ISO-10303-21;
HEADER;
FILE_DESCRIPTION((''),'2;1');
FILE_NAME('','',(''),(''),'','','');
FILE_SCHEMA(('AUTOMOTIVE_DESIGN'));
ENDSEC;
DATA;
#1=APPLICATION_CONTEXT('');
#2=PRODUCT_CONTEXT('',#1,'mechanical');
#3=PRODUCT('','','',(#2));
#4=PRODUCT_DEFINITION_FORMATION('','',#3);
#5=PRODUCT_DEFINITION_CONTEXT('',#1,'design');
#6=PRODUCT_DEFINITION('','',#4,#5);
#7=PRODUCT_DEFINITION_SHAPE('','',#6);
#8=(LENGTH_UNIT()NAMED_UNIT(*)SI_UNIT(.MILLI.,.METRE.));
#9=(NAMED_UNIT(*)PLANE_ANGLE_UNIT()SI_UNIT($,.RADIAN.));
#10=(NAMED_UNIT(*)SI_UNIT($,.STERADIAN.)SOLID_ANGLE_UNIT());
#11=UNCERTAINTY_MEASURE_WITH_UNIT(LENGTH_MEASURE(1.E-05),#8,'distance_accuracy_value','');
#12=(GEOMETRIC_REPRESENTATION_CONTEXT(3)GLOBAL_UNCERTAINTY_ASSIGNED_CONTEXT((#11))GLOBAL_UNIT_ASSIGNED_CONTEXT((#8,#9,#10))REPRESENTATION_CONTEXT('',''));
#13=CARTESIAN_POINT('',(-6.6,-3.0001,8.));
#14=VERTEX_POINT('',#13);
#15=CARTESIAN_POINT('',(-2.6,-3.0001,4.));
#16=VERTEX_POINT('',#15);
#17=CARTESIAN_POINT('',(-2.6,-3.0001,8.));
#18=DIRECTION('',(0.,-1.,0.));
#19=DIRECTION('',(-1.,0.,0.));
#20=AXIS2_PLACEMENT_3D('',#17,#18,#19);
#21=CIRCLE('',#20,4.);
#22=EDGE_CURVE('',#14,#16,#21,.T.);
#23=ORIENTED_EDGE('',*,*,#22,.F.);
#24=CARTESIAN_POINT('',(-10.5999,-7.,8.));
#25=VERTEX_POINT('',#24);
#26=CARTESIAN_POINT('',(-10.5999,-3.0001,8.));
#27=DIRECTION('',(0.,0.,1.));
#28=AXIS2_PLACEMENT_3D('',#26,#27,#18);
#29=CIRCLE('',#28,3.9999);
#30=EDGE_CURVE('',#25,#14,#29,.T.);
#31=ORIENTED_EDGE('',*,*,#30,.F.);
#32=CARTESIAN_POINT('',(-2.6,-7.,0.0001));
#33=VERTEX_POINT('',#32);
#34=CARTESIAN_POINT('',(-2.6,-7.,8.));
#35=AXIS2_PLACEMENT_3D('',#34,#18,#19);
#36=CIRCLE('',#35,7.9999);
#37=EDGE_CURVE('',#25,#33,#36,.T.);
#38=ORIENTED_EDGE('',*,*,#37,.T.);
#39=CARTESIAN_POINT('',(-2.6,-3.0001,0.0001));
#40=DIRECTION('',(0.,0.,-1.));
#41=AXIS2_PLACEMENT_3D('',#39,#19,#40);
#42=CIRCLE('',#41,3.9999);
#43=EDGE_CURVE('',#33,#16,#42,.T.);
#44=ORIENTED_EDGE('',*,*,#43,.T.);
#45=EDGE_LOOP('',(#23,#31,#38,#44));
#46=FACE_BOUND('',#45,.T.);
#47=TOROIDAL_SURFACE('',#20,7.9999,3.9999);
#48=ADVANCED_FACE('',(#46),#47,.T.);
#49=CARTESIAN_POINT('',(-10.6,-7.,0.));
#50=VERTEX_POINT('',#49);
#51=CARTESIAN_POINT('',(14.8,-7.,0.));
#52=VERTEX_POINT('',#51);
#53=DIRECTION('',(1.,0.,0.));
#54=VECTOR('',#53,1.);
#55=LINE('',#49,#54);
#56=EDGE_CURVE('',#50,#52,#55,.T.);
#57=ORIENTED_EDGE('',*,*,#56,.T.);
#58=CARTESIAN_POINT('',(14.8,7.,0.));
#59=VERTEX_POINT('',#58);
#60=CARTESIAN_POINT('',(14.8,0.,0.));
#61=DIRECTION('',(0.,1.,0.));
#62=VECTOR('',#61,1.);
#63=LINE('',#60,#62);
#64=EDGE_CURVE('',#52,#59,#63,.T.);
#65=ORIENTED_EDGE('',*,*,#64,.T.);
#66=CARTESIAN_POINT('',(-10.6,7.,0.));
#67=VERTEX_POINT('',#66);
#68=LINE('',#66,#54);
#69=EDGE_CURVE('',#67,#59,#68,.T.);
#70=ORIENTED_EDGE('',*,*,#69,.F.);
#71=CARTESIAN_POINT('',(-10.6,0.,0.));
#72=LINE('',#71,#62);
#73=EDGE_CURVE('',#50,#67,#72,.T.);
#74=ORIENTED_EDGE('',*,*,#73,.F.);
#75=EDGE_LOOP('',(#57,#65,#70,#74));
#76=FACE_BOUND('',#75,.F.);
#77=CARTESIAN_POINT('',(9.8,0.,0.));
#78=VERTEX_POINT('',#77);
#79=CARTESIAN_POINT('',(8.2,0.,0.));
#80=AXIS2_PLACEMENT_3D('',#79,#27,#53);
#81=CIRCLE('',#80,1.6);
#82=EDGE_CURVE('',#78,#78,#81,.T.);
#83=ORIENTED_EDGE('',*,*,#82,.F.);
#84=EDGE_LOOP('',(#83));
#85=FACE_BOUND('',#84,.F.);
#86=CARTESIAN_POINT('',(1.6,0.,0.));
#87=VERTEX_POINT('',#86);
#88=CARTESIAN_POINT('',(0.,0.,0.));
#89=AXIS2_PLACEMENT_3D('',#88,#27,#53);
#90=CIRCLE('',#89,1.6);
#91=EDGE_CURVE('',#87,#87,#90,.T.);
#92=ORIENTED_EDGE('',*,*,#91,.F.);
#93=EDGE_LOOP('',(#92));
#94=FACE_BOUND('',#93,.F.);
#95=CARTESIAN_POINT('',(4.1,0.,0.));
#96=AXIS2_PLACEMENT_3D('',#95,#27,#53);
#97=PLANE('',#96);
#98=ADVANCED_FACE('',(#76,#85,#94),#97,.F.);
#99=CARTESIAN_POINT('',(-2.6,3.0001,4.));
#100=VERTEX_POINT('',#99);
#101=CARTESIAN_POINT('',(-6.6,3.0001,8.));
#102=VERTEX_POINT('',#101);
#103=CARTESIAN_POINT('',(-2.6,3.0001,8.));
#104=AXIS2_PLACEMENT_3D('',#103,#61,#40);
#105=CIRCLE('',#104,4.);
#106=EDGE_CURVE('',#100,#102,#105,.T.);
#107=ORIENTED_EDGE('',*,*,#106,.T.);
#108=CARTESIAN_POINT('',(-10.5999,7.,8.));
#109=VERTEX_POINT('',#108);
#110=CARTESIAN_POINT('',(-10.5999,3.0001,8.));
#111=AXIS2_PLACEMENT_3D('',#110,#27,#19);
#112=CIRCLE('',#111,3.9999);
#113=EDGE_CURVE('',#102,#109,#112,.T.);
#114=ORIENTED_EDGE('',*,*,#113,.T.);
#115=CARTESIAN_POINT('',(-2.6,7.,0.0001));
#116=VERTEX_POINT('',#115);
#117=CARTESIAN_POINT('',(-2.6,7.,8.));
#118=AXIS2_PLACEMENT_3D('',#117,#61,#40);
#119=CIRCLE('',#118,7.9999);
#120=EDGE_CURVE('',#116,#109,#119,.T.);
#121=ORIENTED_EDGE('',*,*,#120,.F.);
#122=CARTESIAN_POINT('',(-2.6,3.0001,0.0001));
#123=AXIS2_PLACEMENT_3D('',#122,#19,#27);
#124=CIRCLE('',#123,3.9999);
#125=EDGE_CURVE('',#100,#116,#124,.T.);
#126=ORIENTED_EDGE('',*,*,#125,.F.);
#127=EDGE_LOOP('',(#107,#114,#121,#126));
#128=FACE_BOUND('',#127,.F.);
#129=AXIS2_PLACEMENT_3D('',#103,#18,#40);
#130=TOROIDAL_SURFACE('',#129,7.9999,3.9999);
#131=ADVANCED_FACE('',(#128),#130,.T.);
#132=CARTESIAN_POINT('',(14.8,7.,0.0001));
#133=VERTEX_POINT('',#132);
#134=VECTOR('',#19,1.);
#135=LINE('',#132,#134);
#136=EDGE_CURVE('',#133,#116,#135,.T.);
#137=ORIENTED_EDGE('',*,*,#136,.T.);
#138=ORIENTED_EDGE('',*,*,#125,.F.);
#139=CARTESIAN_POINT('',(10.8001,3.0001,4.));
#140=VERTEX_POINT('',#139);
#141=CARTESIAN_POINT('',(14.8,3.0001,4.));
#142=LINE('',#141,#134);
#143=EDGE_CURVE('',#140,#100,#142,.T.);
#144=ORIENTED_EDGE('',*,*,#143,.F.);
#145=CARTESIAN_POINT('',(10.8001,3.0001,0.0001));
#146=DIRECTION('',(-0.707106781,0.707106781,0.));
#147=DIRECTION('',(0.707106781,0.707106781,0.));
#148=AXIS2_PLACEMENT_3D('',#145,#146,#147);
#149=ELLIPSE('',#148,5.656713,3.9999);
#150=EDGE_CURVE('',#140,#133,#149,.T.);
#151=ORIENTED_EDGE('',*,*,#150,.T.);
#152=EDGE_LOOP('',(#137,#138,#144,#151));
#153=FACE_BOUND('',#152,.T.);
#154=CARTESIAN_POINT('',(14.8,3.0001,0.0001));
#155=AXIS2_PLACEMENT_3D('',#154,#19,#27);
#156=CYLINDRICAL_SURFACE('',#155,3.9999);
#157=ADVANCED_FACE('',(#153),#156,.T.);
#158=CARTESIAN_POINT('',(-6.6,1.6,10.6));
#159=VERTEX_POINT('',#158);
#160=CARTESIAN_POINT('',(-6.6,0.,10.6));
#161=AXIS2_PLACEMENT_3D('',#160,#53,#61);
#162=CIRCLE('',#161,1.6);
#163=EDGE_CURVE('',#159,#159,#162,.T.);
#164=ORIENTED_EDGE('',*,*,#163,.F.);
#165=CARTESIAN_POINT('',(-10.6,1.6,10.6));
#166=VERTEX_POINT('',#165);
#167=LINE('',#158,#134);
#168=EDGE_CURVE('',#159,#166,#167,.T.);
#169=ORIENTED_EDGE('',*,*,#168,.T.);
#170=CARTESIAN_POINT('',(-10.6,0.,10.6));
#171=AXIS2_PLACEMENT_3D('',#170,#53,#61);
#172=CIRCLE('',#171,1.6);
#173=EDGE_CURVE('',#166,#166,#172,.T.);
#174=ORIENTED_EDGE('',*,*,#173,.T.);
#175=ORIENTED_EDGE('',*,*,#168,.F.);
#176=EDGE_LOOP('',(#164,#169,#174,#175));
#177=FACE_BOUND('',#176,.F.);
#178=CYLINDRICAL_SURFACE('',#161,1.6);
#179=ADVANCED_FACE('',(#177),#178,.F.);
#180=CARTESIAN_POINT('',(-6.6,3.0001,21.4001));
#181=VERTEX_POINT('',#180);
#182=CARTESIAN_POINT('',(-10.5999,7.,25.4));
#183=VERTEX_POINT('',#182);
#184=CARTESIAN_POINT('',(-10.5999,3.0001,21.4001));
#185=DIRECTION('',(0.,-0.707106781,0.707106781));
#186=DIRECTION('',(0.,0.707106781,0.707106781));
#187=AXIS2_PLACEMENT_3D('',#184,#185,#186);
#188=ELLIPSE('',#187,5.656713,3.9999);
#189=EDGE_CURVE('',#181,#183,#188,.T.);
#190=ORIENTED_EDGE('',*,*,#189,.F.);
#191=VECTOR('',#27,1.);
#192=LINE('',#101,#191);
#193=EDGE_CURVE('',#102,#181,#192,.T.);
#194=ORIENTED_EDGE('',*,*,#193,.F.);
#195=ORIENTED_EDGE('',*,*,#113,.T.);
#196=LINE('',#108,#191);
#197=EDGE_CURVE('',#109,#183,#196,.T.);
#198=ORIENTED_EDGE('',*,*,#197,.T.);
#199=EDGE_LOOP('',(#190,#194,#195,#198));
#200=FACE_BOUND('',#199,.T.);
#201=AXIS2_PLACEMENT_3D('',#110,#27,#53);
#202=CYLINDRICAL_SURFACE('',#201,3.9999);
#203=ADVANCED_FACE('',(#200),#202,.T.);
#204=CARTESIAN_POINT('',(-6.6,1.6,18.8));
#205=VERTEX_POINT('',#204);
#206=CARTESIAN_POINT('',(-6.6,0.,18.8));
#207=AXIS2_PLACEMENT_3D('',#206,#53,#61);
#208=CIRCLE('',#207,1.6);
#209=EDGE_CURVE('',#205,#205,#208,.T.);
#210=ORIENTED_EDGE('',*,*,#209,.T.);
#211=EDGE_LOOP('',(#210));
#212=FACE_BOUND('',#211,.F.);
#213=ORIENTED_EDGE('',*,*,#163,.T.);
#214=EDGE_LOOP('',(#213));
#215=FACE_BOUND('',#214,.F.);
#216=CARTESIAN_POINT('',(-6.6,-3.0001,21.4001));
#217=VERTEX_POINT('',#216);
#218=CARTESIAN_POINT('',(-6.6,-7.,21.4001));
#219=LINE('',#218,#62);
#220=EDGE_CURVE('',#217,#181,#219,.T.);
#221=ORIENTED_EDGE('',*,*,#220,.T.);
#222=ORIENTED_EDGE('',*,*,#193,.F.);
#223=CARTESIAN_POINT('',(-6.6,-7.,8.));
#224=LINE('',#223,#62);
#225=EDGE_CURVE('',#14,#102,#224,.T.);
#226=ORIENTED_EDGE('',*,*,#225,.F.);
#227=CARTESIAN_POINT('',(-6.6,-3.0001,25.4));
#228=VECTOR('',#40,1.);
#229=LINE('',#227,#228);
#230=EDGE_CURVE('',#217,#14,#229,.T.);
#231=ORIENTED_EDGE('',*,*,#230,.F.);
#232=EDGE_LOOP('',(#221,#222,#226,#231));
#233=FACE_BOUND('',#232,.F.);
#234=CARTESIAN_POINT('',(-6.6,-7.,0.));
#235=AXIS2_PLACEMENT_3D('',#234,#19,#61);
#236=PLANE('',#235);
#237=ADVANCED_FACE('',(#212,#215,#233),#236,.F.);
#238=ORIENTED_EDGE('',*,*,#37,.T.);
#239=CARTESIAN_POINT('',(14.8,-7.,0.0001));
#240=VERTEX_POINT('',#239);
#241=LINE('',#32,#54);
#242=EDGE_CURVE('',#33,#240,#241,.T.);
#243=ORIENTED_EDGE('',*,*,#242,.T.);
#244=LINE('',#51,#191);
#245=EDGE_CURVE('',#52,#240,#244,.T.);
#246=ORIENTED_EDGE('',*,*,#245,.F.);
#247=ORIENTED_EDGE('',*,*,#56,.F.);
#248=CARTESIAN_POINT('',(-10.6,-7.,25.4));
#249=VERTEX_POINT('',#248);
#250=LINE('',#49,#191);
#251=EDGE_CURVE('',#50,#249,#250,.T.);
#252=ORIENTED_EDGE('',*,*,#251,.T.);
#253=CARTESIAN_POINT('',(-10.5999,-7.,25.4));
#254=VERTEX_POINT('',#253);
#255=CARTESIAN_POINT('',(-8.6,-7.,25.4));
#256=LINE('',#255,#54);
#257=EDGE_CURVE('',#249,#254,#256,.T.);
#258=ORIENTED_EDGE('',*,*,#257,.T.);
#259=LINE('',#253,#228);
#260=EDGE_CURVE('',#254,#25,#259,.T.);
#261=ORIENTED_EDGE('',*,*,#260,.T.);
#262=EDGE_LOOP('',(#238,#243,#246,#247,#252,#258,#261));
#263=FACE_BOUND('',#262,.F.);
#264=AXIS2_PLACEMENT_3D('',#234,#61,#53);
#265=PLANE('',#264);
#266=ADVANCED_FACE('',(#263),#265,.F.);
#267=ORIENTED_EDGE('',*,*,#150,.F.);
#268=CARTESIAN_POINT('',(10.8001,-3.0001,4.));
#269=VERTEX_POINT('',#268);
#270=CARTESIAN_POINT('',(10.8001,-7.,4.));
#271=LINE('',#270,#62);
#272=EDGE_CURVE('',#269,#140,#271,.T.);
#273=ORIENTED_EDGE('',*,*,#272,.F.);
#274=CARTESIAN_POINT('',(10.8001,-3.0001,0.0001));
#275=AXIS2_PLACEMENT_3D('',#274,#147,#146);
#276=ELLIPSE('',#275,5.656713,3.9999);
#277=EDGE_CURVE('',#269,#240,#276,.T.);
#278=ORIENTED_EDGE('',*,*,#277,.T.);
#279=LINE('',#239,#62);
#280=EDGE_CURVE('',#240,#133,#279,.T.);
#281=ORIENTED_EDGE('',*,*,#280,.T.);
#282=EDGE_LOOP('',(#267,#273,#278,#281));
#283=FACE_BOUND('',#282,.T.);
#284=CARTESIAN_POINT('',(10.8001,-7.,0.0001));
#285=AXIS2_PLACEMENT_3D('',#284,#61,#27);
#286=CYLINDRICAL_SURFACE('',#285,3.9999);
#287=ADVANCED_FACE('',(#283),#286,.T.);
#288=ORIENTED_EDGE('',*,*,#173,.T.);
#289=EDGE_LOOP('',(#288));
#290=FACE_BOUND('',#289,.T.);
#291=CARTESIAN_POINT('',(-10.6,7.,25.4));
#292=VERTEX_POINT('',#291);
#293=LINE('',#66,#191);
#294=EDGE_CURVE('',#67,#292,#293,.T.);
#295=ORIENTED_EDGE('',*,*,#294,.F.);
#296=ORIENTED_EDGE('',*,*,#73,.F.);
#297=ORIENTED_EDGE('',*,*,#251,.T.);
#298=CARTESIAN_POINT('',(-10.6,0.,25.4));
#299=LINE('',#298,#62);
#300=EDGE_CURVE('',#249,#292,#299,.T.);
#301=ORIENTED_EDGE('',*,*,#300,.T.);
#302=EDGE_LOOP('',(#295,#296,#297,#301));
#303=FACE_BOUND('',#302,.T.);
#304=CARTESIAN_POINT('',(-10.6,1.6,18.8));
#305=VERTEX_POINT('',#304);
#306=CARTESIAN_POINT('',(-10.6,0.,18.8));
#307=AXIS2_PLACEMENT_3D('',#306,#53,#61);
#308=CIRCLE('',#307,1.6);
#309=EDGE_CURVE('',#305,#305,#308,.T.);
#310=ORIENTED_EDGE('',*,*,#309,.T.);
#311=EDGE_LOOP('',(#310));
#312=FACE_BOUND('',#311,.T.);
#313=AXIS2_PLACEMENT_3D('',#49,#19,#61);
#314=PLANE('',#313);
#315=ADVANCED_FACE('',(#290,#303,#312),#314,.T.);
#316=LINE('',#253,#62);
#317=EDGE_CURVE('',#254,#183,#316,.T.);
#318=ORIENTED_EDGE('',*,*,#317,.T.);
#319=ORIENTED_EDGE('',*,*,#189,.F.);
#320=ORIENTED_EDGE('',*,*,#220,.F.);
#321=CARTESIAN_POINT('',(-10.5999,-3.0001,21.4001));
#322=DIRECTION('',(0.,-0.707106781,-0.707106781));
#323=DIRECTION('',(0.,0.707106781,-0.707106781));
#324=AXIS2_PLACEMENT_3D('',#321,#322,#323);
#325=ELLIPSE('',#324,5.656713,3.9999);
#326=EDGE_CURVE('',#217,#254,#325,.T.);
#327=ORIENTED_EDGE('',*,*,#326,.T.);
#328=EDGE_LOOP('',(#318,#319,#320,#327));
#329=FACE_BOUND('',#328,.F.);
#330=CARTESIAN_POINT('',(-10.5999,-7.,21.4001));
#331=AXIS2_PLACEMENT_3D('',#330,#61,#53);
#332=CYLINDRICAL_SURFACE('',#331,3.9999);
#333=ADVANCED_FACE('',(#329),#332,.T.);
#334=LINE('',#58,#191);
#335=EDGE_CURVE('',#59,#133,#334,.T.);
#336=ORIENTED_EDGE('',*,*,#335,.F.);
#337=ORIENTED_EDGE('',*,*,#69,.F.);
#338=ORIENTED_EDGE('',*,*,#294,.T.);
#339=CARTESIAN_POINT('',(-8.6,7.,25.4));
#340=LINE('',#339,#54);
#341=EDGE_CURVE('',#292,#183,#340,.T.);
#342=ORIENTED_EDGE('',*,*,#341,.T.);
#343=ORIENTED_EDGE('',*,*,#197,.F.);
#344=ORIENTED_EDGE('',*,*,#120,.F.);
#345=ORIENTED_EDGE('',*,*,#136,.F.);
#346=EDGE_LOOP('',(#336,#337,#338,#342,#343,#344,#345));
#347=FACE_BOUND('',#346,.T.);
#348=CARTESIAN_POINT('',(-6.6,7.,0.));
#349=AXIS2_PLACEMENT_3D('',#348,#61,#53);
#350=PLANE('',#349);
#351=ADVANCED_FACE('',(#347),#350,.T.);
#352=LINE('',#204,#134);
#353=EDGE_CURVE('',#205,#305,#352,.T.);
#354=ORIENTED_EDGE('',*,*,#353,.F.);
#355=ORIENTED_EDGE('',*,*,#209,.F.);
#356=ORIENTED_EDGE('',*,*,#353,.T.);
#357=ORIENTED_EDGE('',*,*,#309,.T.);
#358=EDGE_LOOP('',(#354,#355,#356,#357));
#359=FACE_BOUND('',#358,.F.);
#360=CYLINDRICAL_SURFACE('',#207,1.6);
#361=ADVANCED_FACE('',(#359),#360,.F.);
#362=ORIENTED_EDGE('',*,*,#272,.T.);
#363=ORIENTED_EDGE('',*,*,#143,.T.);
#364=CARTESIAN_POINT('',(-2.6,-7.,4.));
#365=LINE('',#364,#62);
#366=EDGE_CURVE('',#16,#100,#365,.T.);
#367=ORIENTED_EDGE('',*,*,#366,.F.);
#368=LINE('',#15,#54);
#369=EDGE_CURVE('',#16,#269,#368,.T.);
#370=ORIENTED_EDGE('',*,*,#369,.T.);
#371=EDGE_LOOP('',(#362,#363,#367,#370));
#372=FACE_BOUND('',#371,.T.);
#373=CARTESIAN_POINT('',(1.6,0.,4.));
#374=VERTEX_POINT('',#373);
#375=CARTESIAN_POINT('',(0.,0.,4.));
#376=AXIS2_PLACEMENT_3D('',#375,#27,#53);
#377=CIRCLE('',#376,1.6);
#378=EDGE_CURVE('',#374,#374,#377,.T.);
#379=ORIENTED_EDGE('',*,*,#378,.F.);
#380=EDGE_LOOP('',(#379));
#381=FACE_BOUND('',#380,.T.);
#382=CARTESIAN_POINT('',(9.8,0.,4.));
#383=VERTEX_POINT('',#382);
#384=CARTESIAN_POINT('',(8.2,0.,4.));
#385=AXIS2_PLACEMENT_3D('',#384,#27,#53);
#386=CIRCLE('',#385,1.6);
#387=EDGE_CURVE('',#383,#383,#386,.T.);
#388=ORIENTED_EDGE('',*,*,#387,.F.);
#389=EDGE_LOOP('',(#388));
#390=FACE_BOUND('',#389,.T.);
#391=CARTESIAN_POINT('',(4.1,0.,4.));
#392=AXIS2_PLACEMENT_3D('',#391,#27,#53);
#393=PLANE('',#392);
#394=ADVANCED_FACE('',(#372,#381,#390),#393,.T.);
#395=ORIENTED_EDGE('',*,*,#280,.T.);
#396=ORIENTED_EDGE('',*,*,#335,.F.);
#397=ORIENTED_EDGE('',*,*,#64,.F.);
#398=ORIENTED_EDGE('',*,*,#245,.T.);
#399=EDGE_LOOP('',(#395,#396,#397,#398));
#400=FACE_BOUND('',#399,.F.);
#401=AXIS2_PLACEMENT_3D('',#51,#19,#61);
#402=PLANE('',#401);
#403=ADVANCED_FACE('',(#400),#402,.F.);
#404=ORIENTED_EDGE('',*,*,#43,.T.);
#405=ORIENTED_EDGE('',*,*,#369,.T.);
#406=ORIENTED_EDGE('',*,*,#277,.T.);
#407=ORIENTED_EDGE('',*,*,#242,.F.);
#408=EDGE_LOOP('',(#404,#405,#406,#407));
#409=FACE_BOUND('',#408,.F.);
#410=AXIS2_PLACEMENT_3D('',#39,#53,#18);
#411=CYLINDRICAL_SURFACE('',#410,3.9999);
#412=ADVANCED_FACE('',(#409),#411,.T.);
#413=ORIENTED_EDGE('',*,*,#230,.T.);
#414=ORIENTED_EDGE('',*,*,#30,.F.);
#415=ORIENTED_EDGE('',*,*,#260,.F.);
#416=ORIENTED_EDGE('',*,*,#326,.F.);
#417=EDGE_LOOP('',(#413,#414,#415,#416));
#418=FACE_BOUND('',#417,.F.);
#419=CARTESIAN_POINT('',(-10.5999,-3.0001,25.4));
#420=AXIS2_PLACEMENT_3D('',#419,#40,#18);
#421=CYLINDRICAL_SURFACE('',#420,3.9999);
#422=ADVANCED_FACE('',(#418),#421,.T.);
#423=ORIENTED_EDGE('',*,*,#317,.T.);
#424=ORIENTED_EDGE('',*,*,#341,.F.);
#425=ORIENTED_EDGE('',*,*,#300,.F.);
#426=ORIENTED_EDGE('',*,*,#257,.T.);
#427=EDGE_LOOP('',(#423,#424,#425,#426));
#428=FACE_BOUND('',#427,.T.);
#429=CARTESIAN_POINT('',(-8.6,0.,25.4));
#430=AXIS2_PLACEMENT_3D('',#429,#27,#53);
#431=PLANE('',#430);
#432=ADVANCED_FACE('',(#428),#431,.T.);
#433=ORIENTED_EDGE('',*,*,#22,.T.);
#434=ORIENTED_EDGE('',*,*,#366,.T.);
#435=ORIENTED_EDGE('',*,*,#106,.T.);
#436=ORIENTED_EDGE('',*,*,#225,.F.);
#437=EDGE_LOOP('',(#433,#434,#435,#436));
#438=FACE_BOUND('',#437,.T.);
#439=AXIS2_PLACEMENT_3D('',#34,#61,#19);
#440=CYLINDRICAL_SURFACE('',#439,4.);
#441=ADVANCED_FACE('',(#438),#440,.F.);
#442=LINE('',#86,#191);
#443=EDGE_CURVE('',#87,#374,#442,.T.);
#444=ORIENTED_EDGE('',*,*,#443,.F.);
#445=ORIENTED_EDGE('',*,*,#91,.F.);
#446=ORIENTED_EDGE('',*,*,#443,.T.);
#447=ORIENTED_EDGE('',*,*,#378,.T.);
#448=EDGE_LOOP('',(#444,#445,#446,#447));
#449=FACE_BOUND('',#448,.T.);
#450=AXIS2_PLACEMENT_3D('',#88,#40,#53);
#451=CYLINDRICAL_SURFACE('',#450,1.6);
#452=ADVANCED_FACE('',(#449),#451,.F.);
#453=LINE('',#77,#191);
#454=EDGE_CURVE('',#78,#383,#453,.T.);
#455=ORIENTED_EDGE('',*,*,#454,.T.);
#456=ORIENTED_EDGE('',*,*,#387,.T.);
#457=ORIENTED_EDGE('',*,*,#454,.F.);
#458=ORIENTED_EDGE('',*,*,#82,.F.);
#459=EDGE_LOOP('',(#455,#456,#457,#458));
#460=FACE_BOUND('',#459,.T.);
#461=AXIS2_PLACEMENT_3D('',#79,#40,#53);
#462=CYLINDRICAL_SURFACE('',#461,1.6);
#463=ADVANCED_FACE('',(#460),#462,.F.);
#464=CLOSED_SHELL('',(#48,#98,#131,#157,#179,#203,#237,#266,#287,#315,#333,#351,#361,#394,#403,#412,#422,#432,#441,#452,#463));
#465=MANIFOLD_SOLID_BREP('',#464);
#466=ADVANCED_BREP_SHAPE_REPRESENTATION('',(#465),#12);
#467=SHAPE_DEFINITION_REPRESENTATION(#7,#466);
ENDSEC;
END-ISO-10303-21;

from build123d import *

# Parameters (mm, degrees)
F0_W     = 4
F0_H     = 14
F1_DEPTH = 25.4
F0_W_2   = 21.4
F0_R     = 1.6
F2_DEPTH = 4
F3_R     = 1.6
F4_DEPTH = 4
F5_F1_R  = 4
F5_F2_R  = 3.9999


# Not quite as in the source:
# - a fillet or chamfer is up to 0.001 mm smaller than in the source, because OpenCascade refuses the exact size


with BuildPart() as f1:
    # F0 (on Top) → F1 (new body)
    with BuildSketch(Plane.XY):
        with Locations((-8.6, 0)):
            Rectangle(F0_W, F0_H)
    extrude(amount=F1_DEPTH)

    # F0 (on Top) → F2 (join)
    with BuildSketch(Plane.XY):
        with Locations((4.1, 0)):
            Rectangle(F0_W_2, F0_H)
        Circle(F0_R, mode=Mode.SUBTRACT)
        with Locations((8.2, 0)):
            Circle(F0_R, mode=Mode.SUBTRACT)
    extrude(amount=F2_DEPTH)

    # F3 (on face) → F4 (cut, through all)
    with BuildSketch(Plane.YZ.offset(-6.6)):
        with Locations((0, 18.8)):
            Circle(F3_R)
        with Locations((0, 10.6)):
            Circle(F3_R)
    extrude(amount=-F4_DEPTH, mode=Mode.SUBTRACT)

    # F5: fillet of radius 4 on 5 edges, made by hand

    # F5_f1
    f5_f1_edges = [f1.edges().sort_by_distance(p)[0] for p in [
        (-6.6, 0, 4),
    ]]
    fillet(f5_f1_edges, radius=F5_F1_R)

    # F5_f2 (radius 4 in the source; OpenCascade refuses exactly that, so slightly less here)
    f5_f2_edges = [f1.edges().sort_by_distance(p)[0] for p in [
        (-6.6, 0, 25.4),
        (14.8, 0, 4),
        (-6.6, 7, 16.7),
        (6.1, -7, 4),
        (-5.4284271247, -7, 5.1715728753),
        (-5.4284271247, 7, 5.1715728753),
    ]]
    fillet(f5_f2_edges, radius=F5_F2_R)


solid = f1.part
